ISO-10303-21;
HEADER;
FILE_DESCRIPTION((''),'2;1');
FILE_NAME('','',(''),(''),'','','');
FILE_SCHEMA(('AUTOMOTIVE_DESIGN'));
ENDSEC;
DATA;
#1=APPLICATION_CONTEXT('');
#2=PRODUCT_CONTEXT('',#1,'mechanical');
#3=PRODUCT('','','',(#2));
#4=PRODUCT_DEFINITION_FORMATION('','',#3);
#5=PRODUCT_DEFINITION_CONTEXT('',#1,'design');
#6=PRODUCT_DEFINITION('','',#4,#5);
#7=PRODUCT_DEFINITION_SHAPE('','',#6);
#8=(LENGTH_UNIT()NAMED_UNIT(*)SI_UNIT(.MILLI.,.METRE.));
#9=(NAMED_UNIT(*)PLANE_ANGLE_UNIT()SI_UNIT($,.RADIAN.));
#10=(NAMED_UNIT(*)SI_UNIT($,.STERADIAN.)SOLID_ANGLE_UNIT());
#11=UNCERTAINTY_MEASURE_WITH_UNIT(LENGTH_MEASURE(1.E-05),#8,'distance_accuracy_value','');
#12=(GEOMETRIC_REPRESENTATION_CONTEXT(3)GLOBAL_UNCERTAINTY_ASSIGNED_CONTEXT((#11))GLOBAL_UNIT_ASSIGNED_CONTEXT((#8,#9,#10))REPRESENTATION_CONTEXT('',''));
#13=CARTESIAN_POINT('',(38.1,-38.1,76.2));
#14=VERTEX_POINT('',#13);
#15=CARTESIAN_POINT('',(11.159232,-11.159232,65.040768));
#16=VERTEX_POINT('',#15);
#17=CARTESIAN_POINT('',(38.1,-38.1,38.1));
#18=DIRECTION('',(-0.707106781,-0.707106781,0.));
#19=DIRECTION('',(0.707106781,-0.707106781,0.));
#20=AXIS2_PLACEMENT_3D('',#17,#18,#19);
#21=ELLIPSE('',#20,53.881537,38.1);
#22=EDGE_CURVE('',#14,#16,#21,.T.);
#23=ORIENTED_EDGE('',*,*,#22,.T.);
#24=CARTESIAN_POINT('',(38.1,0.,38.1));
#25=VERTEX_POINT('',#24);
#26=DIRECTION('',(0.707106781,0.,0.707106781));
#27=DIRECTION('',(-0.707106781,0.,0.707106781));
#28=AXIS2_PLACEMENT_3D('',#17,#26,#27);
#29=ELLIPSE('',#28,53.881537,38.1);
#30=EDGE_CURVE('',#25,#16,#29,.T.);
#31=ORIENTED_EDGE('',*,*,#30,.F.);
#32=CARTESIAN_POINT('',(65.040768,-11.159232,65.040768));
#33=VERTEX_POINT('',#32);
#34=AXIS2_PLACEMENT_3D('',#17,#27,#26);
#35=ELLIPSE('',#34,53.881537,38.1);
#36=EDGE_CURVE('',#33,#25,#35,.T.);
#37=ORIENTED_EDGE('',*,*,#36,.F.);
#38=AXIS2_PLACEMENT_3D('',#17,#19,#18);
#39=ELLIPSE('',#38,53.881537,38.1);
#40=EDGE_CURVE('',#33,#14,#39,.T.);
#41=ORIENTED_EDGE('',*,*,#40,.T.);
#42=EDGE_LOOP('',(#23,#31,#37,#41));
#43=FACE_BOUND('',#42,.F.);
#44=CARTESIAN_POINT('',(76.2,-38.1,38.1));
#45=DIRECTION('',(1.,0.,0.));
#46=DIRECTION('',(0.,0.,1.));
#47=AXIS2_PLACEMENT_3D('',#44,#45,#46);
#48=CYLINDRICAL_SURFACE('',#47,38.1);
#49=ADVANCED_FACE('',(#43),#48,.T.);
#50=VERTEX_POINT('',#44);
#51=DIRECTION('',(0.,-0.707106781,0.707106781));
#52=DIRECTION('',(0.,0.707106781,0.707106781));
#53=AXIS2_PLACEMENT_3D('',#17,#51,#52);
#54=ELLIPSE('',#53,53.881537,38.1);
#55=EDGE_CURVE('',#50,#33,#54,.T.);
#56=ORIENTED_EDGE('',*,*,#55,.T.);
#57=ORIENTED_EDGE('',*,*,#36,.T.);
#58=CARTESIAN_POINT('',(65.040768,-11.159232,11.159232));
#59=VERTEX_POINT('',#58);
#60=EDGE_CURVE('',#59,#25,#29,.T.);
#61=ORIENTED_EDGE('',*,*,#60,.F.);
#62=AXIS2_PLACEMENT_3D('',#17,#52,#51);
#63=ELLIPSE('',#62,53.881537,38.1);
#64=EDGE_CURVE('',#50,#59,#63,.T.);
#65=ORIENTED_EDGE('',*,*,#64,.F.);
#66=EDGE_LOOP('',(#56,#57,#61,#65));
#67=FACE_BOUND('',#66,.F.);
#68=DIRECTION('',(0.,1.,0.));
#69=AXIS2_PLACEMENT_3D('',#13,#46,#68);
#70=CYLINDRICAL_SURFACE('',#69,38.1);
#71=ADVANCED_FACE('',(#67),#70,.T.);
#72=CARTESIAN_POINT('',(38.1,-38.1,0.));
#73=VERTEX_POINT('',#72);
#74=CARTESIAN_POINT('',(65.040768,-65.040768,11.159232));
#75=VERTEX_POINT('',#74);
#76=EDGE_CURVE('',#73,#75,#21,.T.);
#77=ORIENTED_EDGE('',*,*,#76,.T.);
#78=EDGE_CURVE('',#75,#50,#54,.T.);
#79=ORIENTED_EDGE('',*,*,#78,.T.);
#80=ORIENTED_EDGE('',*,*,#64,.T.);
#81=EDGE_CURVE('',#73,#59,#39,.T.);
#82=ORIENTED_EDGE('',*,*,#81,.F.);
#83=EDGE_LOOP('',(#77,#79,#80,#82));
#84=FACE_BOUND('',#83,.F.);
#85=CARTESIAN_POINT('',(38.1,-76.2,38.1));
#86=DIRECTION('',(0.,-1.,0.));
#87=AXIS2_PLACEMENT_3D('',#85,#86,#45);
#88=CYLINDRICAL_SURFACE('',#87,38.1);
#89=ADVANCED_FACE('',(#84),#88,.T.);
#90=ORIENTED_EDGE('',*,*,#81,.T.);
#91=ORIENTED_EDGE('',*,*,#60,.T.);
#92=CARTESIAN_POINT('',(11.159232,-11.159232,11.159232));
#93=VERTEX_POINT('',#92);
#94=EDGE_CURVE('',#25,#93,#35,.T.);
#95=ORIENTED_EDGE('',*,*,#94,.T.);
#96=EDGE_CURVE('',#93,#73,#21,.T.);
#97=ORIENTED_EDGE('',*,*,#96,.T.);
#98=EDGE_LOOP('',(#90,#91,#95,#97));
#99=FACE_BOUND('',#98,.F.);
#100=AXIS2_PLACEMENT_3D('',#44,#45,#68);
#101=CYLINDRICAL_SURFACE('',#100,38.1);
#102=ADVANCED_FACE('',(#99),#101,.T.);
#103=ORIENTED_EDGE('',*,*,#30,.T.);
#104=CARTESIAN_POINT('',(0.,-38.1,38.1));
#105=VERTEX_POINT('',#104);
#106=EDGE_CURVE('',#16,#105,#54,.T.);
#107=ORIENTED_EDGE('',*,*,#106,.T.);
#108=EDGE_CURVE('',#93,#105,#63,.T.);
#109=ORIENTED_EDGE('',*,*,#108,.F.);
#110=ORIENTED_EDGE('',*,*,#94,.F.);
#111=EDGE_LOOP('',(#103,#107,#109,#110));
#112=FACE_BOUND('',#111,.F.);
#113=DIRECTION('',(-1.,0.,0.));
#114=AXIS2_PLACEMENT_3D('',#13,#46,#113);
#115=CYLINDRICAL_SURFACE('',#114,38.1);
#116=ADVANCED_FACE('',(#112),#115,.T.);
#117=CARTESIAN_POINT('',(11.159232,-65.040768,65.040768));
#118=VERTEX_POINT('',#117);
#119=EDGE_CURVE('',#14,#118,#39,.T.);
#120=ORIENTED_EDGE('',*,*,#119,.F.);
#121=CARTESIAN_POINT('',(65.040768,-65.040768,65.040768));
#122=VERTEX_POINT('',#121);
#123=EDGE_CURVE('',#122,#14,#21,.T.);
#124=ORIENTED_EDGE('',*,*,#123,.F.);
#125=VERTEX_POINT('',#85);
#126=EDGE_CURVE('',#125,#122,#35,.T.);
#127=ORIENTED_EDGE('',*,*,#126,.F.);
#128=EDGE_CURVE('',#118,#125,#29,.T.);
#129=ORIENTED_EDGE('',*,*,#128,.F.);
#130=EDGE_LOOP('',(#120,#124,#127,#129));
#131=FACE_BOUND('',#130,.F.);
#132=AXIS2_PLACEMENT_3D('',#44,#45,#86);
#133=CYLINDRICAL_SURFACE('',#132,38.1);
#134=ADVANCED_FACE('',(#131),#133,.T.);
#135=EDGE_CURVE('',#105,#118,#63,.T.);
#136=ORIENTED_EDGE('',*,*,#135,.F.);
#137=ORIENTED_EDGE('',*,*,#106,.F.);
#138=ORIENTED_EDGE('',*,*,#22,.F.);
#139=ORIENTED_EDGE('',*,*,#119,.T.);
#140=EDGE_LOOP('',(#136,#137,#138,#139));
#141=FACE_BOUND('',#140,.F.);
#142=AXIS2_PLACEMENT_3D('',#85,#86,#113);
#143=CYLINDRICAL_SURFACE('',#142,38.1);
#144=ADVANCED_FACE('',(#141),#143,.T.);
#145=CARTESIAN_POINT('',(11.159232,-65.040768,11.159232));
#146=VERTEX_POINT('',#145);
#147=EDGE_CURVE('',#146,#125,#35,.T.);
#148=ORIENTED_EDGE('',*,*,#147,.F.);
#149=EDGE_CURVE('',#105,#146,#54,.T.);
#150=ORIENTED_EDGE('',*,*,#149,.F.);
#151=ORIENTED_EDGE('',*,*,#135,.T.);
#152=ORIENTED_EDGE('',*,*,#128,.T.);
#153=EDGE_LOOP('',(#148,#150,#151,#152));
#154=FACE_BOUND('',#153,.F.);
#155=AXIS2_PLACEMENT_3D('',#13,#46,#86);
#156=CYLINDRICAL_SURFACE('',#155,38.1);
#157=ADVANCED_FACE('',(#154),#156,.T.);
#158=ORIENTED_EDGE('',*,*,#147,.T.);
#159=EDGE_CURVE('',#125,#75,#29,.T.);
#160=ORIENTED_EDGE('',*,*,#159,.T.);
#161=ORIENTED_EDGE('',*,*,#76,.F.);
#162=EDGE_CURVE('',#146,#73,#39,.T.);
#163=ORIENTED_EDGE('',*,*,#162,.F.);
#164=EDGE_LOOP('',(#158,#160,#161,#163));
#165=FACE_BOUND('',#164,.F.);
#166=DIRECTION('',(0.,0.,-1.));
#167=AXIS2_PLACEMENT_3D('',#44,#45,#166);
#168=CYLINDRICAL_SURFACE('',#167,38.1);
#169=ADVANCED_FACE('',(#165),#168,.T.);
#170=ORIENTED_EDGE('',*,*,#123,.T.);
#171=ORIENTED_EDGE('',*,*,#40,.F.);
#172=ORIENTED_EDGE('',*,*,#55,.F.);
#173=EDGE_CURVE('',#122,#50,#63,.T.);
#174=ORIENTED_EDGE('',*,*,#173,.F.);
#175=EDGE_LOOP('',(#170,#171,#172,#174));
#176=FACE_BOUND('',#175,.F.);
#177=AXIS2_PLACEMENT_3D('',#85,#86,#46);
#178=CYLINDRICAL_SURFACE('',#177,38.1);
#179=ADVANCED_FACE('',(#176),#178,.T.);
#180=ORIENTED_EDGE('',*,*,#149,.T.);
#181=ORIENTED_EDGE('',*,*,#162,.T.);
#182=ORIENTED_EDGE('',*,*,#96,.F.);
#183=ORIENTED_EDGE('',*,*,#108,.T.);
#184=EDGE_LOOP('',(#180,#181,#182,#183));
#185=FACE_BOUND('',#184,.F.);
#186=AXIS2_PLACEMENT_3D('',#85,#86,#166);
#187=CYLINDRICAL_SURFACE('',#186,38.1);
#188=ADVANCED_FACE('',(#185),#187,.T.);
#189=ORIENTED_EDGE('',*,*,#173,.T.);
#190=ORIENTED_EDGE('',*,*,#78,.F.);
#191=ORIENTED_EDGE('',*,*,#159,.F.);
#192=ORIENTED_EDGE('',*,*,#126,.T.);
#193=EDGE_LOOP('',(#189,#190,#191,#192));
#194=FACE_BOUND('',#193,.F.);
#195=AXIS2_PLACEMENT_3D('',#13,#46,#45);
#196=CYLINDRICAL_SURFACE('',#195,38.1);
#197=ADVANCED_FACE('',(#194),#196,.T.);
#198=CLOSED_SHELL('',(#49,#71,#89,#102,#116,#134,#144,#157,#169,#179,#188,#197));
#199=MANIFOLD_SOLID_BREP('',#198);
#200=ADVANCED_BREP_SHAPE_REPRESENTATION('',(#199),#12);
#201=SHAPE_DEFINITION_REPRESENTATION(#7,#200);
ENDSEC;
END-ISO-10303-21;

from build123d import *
from build123d import SkipClean  # not in build123d's __all__

# Parameters (mm, degrees)
F0_W     = 76.2
F0_H     = 76.2
F1_DEPTH = 76.2
F5_DEPTH = 76.201
F6_DEPTH = 76.201
F7_DEPTH = 76.201


with BuildPart() as f1:
    # F0 (on Front) → F1 (new body)
    with BuildSketch(Plane.XZ):
        with Locations((38.1, 38.1)):
            Rectangle(F0_W, F0_H)
    extrude(amount=F1_DEPTH)

    # F2 (on face) → F5 (cut, through all)
    with BuildSketch(Plane.XY.offset(76.2)):
        with BuildLine():
            Line((76.2, -76.2), (76.2, -38.1))
            ThreePointArc((76.2, -38.1), (65.0407683632, -65.0407683632), (38.1, -76.2))
            Line((38.1, -76.2), (76.2, -76.2))
        make_face()
        with BuildLine():
            ThreePointArc((38.1, 0), (65.0407683632, -11.1592316368), (76.2, -38.1))
            Line((76.2, -38.1), (76.2, 0))
            Line((76.2, 0), (38.1, 0))
        make_face()
        with BuildLine():
            ThreePointArc((0, -38.1), (11.1592316368, -11.1592316368), (38.1, 0))
            Line((38.1, 0), (0, 0))
            Line((0, 0), (0, -38.1))
        make_face()
        with BuildLine():
            Line((0, -76.2), (38.1, -76.2))
            ThreePointArc((38.1, -76.2), (11.1592316368, -65.0407683632), (0, -38.1))
            Line((0, -38.1), (0, -76.2))
        make_face()
    extrude(amount=-F5_DEPTH, mode=Mode.SUBTRACT)

    # F3 (on face) → F6 (cut, through all)
    with BuildSketch(Plane.XZ.offset(76.2)):
        with BuildLine():
            ThreePointArc((38.1, 76.2), (65.0407683632, 65.0407683632), (76.2, 38.1))
            Line((76.2, 38.1), (76.2, 76.2))
            Line((76.2, 76.2), (38.1, 76.2))
        make_face()
        with BuildLine():
            ThreePointArc((0, 38.1), (11.1592316368, 65.0407683632), (38.1, 76.2))
            Line((38.1, 76.2), (0, 76.2))
            Line((0, 76.2), (0, 38.1))
        make_face()
        with BuildLine():
            Line((76.2, 0), (76.2, 38.1))
            ThreePointArc((76.2, 38.1), (65.0407683632, 11.1592316368), (38.1, 0))
            Line((38.1, 0), (76.2, 0))
        make_face()
        with BuildLine():
            Line((0, 0), (38.1, 0))
            ThreePointArc((38.1, 0), (11.1592316368, 11.1592316368), (0, 38.1))
            Line((0, 38.1), (0, 0))
        make_face()
    extrude(amount=-F6_DEPTH, mode=Mode.SUBTRACT)

    # F4 (on face) → F7 (cut, through all)
    with BuildSketch(Plane.YZ.offset(76.2)):
        with BuildLine():
            ThreePointArc((-38.1, 76.2), (-11.1592316368, 65.0407683632), (0, 38.1))
            Line((0, 38.1), (0, 76.2))
            Line((0, 76.2), (-38.1, 76.2))
        make_face()
        with BuildLine():
            Line((0, 0), (0, 38.1))
            ThreePointArc((0, 38.1), (-11.1592316368, 11.1592316368), (-38.1, 0))
            Line((-38.1, 0), (0, 0))
        make_face()
        with BuildLine():
            Line((-76.2, 0), (-38.1, 0))
            ThreePointArc((-38.1, 0), (-65.0407683632, 11.1592316368), (-76.2, 38.1))
            Line((-76.2, 38.1), (-76.2, 0))
        make_face()
        with BuildLine():
            ThreePointArc((-76.2, 38.1), (-65.0407683632, 65.0407683632), (-38.1, 76.2))
            Line((-38.1, 76.2), (-76.2, 76.2))
            Line((-76.2, 76.2), (-76.2, 38.1))
        make_face()
    with SkipClean():  # cleaning this boolean's faces spoils the solid; the shape is the same uncleaned
        extrude(amount=-F7_DEPTH, mode=Mode.SUBTRACT)


solid = f1.part
